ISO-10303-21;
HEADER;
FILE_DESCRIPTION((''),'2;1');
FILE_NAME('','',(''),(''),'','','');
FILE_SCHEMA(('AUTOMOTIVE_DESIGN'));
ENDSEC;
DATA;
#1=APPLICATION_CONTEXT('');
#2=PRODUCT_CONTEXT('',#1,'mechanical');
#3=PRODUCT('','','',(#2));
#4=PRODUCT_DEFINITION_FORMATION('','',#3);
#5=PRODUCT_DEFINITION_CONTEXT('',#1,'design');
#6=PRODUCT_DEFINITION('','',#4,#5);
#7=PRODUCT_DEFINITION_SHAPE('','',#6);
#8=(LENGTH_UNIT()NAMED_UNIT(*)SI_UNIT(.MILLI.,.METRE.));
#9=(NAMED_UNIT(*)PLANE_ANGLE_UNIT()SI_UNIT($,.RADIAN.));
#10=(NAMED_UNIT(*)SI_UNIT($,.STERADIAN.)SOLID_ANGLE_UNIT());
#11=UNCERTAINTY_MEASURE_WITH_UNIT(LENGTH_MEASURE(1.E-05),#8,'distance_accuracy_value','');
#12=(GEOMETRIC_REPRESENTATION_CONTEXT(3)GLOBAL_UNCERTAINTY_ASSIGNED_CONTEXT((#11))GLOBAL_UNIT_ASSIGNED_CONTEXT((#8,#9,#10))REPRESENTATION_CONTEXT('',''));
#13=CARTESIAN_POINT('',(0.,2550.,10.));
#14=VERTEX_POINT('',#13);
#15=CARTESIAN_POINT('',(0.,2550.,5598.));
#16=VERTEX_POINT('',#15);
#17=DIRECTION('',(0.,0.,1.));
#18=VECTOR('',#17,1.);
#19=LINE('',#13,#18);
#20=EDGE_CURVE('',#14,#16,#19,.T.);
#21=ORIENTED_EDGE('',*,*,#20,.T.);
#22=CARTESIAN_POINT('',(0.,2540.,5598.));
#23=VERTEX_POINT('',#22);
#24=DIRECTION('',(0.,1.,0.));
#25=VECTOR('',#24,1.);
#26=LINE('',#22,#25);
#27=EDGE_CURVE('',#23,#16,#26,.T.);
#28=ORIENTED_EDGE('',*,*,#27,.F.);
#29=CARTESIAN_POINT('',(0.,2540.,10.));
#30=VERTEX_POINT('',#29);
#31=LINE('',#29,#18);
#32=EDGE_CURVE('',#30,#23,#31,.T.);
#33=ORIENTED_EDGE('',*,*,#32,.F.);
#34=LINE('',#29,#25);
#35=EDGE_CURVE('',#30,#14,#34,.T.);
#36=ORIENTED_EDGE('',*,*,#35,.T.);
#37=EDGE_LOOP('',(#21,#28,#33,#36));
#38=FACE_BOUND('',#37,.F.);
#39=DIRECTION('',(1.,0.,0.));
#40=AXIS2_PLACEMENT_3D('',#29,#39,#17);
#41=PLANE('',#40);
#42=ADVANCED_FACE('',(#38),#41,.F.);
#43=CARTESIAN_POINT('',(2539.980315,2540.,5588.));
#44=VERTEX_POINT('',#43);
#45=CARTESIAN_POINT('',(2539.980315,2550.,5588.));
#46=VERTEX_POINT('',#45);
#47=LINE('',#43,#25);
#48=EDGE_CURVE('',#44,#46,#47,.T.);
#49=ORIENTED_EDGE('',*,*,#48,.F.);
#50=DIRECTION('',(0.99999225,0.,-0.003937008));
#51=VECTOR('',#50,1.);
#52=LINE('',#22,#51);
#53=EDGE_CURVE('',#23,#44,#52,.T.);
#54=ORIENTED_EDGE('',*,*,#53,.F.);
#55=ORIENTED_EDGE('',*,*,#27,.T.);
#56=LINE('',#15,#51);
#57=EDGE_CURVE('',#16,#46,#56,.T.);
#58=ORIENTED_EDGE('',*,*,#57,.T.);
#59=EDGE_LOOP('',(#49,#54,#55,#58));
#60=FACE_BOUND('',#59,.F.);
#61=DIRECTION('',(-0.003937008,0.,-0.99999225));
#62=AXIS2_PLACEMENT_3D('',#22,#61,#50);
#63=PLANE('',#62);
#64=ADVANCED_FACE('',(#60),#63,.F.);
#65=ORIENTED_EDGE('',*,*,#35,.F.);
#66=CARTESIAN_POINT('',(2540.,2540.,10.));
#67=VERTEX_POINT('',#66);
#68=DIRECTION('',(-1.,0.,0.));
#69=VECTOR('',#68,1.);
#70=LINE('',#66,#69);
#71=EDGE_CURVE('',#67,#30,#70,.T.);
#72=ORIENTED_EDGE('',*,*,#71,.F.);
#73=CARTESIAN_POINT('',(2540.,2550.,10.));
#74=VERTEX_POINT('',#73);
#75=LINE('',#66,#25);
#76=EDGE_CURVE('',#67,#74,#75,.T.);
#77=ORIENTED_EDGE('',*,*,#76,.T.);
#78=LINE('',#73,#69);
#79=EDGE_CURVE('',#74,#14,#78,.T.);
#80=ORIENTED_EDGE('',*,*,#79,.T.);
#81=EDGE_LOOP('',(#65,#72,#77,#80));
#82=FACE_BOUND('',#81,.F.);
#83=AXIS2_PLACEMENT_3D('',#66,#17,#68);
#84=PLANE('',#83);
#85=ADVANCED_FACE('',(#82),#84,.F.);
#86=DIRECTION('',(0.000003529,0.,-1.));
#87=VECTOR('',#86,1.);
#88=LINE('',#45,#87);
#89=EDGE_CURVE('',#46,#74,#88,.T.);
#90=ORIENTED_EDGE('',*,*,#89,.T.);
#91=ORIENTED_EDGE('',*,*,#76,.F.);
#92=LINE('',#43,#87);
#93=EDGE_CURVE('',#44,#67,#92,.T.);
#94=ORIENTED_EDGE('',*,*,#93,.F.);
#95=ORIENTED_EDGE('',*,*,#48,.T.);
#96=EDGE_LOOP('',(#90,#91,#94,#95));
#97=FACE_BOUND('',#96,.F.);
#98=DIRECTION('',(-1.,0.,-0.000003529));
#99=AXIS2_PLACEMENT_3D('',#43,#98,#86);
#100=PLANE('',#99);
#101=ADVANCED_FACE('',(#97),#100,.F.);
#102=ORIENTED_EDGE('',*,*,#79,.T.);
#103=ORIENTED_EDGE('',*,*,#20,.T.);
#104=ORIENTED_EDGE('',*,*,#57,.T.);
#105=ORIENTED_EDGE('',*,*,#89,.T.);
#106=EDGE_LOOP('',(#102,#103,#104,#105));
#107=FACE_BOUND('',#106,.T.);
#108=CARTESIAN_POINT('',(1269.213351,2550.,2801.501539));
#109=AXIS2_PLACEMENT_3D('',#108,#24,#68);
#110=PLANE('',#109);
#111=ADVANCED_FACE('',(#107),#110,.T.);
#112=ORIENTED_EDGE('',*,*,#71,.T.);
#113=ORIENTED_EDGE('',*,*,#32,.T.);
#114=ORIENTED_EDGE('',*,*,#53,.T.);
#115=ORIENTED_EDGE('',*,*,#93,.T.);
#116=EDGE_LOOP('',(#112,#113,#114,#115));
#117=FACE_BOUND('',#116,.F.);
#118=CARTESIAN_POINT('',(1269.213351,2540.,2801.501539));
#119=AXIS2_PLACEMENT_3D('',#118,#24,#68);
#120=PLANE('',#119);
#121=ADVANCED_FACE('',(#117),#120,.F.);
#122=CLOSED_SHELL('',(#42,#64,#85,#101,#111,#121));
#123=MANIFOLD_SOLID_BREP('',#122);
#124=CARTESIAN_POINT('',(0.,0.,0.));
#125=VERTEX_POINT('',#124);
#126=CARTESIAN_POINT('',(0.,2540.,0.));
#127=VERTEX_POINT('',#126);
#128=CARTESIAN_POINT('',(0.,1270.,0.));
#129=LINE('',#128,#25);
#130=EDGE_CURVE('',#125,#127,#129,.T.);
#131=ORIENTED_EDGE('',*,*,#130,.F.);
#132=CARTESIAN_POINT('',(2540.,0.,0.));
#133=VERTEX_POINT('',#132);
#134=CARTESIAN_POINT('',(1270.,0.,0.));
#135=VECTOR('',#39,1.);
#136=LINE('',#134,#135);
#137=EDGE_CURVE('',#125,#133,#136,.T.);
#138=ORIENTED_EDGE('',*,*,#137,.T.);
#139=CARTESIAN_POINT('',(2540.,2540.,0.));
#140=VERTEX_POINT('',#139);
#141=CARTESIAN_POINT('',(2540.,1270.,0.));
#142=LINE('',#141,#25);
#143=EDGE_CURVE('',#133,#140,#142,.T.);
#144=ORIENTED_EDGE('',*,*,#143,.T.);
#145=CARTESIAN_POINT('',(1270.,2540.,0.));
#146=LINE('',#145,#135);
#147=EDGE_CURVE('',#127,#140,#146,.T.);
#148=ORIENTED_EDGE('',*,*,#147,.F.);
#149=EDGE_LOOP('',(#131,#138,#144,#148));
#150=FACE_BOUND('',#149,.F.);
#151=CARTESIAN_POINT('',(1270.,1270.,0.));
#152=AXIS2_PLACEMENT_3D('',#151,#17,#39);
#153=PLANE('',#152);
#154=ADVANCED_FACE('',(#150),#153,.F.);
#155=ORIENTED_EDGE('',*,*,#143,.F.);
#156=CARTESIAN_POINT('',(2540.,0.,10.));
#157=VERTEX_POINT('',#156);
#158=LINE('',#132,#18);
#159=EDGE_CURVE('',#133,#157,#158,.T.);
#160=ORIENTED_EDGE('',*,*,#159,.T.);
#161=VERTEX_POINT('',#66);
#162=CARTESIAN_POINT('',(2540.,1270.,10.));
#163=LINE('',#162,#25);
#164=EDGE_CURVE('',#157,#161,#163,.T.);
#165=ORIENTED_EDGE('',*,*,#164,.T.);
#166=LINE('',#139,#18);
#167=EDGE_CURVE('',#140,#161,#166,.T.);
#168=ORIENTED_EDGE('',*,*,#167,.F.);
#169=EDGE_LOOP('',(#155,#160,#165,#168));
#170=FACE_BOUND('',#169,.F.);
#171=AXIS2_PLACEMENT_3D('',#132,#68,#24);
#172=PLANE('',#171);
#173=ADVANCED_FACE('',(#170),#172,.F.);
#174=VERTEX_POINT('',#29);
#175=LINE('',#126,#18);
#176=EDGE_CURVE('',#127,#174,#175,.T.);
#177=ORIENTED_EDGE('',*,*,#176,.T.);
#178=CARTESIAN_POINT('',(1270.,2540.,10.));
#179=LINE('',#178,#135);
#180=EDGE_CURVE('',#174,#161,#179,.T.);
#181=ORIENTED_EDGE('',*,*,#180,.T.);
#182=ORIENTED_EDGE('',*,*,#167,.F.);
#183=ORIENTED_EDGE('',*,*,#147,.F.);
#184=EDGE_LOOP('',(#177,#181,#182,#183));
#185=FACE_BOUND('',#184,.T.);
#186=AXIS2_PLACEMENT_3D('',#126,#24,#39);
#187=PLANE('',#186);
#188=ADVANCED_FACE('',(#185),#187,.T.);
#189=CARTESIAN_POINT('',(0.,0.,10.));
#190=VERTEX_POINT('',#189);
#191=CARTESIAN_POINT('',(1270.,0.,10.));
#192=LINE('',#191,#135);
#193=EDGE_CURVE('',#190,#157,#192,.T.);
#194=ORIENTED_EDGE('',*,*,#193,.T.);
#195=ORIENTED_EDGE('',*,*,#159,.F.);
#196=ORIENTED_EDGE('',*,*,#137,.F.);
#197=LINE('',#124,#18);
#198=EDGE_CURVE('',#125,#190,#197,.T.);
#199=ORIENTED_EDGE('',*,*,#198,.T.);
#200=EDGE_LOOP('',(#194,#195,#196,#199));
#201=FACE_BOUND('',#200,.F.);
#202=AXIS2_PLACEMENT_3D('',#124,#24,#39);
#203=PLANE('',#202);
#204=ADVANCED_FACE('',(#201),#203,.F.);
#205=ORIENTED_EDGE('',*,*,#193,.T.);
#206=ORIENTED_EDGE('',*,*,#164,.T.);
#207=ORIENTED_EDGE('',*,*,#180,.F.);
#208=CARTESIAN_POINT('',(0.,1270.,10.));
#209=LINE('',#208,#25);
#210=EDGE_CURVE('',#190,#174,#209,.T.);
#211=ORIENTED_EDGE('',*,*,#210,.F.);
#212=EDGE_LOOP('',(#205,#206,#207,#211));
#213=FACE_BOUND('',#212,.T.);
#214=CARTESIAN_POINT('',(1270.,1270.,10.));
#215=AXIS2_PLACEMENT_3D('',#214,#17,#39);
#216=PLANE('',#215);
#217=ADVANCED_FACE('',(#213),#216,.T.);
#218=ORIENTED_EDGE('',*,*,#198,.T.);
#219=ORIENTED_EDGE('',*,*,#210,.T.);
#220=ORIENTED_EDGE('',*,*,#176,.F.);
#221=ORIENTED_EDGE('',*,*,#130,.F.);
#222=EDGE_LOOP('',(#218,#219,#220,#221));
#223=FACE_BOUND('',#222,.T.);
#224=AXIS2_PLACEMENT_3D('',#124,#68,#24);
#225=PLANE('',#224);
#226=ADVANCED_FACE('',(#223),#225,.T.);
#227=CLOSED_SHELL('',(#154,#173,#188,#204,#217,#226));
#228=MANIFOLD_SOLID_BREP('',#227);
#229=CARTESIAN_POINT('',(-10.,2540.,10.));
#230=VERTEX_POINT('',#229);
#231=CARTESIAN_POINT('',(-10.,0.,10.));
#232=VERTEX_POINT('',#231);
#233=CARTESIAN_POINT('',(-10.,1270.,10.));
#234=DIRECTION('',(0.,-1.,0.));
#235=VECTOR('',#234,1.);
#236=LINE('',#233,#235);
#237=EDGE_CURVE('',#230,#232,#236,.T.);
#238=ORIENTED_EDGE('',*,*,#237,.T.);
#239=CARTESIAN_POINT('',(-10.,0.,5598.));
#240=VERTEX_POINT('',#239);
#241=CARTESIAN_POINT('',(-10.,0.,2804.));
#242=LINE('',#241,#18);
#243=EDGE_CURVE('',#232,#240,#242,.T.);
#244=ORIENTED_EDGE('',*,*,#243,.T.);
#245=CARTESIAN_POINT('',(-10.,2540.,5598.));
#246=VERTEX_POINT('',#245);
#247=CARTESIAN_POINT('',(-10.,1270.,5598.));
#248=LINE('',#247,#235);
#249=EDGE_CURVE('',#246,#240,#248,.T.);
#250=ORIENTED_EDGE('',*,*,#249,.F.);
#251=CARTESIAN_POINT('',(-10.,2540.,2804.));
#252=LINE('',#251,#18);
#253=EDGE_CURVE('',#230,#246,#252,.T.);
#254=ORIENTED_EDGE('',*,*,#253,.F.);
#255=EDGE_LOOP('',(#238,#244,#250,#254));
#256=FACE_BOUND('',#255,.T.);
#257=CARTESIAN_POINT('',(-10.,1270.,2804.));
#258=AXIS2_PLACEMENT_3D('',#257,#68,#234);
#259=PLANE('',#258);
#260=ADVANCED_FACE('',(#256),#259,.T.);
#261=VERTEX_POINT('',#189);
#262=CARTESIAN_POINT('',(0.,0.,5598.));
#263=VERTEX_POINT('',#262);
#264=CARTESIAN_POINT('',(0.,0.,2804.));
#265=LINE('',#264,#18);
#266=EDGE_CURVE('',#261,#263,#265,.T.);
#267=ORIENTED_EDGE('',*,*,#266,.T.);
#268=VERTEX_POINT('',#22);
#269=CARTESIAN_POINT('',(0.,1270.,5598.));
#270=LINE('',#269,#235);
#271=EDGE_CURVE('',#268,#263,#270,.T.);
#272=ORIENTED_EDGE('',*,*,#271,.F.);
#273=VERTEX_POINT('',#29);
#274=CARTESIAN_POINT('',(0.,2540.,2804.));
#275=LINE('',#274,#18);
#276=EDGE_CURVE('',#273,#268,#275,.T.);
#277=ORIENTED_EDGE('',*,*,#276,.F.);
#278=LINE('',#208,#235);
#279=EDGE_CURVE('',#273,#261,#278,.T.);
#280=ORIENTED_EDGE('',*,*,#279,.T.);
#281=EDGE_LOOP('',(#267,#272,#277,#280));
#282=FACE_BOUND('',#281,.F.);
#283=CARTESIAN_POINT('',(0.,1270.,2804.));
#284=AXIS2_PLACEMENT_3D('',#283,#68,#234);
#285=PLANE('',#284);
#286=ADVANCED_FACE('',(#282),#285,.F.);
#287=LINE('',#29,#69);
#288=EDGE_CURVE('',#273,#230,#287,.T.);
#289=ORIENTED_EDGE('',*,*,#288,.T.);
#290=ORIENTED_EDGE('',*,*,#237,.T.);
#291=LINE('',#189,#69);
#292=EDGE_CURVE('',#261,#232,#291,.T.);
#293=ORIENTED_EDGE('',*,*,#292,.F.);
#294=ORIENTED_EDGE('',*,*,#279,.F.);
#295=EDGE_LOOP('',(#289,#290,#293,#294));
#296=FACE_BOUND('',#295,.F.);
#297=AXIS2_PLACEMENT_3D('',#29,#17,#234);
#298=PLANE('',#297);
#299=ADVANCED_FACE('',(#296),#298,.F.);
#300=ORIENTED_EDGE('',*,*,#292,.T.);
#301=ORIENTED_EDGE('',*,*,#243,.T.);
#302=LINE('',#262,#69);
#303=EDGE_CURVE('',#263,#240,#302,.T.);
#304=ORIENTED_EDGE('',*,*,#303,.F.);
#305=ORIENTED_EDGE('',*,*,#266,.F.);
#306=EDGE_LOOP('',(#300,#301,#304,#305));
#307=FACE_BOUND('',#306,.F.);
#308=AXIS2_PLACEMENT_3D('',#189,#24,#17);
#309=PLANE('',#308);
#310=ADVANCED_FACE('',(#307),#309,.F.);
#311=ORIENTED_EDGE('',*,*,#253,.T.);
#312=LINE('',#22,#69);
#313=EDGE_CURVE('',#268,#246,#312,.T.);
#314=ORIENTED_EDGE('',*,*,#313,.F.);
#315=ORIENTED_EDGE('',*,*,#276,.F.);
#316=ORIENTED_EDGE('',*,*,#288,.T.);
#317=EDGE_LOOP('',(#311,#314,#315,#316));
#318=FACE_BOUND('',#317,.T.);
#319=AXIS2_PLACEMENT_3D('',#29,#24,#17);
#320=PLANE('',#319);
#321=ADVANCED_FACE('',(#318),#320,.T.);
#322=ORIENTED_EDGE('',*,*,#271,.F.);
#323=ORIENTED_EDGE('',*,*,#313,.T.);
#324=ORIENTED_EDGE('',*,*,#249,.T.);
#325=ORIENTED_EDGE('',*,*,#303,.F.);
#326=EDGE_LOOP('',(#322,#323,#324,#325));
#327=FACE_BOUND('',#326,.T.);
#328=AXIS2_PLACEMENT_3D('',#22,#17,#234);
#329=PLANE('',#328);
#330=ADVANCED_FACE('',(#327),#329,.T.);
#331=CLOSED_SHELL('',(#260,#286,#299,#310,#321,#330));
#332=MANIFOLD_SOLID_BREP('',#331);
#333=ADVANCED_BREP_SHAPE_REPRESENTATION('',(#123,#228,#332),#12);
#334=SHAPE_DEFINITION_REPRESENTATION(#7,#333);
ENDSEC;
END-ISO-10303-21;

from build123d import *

# Parameters (mm, degrees)
F0_W     = 2540
F0_H     = 2540
F1_DEPTH = 10
F2_W     = 2540
F2_H     = 5588
F3_DEPTH = 10
F5_DEPTH = 10


# Not quite as in the source:
# - ends of sketch curves that miss each other by under 0.0002 mm in the source are joined


with BuildPart() as f1:
    # F0 (on Top) → F1 (new body)
    with BuildSketch(Plane.XY):
        with Locations((1270, 1270)):
            Rectangle(F0_W, F0_H)
    extrude(amount=F1_DEPTH)


with BuildPart() as f3:
    # F2 (on face) → F3 (new body)
    with BuildSketch(Plane(origin=(0, 0, 0), x_dir=(0, -1, 0), z_dir=(-1, 0, 0))):
        with Locations((-1270, 2804)):
            Rectangle(F2_W, F2_H)
    extrude(amount=F3_DEPTH)


with BuildPart() as f5:
    # F4 (on face) → F5 (new body)
    with BuildSketch(Plane(origin=(0, 2540, 0), x_dir=(-1, 0, 0), z_dir=(0, 1, 0))):
        Polygon((-2540, 10), (0, 10), (0, 5598), (-2539.9803148842, 5587.9999999653), align=None)
    extrude(amount=F5_DEPTH)


solid = Compound([f1.part, f3.part, f5.part])
